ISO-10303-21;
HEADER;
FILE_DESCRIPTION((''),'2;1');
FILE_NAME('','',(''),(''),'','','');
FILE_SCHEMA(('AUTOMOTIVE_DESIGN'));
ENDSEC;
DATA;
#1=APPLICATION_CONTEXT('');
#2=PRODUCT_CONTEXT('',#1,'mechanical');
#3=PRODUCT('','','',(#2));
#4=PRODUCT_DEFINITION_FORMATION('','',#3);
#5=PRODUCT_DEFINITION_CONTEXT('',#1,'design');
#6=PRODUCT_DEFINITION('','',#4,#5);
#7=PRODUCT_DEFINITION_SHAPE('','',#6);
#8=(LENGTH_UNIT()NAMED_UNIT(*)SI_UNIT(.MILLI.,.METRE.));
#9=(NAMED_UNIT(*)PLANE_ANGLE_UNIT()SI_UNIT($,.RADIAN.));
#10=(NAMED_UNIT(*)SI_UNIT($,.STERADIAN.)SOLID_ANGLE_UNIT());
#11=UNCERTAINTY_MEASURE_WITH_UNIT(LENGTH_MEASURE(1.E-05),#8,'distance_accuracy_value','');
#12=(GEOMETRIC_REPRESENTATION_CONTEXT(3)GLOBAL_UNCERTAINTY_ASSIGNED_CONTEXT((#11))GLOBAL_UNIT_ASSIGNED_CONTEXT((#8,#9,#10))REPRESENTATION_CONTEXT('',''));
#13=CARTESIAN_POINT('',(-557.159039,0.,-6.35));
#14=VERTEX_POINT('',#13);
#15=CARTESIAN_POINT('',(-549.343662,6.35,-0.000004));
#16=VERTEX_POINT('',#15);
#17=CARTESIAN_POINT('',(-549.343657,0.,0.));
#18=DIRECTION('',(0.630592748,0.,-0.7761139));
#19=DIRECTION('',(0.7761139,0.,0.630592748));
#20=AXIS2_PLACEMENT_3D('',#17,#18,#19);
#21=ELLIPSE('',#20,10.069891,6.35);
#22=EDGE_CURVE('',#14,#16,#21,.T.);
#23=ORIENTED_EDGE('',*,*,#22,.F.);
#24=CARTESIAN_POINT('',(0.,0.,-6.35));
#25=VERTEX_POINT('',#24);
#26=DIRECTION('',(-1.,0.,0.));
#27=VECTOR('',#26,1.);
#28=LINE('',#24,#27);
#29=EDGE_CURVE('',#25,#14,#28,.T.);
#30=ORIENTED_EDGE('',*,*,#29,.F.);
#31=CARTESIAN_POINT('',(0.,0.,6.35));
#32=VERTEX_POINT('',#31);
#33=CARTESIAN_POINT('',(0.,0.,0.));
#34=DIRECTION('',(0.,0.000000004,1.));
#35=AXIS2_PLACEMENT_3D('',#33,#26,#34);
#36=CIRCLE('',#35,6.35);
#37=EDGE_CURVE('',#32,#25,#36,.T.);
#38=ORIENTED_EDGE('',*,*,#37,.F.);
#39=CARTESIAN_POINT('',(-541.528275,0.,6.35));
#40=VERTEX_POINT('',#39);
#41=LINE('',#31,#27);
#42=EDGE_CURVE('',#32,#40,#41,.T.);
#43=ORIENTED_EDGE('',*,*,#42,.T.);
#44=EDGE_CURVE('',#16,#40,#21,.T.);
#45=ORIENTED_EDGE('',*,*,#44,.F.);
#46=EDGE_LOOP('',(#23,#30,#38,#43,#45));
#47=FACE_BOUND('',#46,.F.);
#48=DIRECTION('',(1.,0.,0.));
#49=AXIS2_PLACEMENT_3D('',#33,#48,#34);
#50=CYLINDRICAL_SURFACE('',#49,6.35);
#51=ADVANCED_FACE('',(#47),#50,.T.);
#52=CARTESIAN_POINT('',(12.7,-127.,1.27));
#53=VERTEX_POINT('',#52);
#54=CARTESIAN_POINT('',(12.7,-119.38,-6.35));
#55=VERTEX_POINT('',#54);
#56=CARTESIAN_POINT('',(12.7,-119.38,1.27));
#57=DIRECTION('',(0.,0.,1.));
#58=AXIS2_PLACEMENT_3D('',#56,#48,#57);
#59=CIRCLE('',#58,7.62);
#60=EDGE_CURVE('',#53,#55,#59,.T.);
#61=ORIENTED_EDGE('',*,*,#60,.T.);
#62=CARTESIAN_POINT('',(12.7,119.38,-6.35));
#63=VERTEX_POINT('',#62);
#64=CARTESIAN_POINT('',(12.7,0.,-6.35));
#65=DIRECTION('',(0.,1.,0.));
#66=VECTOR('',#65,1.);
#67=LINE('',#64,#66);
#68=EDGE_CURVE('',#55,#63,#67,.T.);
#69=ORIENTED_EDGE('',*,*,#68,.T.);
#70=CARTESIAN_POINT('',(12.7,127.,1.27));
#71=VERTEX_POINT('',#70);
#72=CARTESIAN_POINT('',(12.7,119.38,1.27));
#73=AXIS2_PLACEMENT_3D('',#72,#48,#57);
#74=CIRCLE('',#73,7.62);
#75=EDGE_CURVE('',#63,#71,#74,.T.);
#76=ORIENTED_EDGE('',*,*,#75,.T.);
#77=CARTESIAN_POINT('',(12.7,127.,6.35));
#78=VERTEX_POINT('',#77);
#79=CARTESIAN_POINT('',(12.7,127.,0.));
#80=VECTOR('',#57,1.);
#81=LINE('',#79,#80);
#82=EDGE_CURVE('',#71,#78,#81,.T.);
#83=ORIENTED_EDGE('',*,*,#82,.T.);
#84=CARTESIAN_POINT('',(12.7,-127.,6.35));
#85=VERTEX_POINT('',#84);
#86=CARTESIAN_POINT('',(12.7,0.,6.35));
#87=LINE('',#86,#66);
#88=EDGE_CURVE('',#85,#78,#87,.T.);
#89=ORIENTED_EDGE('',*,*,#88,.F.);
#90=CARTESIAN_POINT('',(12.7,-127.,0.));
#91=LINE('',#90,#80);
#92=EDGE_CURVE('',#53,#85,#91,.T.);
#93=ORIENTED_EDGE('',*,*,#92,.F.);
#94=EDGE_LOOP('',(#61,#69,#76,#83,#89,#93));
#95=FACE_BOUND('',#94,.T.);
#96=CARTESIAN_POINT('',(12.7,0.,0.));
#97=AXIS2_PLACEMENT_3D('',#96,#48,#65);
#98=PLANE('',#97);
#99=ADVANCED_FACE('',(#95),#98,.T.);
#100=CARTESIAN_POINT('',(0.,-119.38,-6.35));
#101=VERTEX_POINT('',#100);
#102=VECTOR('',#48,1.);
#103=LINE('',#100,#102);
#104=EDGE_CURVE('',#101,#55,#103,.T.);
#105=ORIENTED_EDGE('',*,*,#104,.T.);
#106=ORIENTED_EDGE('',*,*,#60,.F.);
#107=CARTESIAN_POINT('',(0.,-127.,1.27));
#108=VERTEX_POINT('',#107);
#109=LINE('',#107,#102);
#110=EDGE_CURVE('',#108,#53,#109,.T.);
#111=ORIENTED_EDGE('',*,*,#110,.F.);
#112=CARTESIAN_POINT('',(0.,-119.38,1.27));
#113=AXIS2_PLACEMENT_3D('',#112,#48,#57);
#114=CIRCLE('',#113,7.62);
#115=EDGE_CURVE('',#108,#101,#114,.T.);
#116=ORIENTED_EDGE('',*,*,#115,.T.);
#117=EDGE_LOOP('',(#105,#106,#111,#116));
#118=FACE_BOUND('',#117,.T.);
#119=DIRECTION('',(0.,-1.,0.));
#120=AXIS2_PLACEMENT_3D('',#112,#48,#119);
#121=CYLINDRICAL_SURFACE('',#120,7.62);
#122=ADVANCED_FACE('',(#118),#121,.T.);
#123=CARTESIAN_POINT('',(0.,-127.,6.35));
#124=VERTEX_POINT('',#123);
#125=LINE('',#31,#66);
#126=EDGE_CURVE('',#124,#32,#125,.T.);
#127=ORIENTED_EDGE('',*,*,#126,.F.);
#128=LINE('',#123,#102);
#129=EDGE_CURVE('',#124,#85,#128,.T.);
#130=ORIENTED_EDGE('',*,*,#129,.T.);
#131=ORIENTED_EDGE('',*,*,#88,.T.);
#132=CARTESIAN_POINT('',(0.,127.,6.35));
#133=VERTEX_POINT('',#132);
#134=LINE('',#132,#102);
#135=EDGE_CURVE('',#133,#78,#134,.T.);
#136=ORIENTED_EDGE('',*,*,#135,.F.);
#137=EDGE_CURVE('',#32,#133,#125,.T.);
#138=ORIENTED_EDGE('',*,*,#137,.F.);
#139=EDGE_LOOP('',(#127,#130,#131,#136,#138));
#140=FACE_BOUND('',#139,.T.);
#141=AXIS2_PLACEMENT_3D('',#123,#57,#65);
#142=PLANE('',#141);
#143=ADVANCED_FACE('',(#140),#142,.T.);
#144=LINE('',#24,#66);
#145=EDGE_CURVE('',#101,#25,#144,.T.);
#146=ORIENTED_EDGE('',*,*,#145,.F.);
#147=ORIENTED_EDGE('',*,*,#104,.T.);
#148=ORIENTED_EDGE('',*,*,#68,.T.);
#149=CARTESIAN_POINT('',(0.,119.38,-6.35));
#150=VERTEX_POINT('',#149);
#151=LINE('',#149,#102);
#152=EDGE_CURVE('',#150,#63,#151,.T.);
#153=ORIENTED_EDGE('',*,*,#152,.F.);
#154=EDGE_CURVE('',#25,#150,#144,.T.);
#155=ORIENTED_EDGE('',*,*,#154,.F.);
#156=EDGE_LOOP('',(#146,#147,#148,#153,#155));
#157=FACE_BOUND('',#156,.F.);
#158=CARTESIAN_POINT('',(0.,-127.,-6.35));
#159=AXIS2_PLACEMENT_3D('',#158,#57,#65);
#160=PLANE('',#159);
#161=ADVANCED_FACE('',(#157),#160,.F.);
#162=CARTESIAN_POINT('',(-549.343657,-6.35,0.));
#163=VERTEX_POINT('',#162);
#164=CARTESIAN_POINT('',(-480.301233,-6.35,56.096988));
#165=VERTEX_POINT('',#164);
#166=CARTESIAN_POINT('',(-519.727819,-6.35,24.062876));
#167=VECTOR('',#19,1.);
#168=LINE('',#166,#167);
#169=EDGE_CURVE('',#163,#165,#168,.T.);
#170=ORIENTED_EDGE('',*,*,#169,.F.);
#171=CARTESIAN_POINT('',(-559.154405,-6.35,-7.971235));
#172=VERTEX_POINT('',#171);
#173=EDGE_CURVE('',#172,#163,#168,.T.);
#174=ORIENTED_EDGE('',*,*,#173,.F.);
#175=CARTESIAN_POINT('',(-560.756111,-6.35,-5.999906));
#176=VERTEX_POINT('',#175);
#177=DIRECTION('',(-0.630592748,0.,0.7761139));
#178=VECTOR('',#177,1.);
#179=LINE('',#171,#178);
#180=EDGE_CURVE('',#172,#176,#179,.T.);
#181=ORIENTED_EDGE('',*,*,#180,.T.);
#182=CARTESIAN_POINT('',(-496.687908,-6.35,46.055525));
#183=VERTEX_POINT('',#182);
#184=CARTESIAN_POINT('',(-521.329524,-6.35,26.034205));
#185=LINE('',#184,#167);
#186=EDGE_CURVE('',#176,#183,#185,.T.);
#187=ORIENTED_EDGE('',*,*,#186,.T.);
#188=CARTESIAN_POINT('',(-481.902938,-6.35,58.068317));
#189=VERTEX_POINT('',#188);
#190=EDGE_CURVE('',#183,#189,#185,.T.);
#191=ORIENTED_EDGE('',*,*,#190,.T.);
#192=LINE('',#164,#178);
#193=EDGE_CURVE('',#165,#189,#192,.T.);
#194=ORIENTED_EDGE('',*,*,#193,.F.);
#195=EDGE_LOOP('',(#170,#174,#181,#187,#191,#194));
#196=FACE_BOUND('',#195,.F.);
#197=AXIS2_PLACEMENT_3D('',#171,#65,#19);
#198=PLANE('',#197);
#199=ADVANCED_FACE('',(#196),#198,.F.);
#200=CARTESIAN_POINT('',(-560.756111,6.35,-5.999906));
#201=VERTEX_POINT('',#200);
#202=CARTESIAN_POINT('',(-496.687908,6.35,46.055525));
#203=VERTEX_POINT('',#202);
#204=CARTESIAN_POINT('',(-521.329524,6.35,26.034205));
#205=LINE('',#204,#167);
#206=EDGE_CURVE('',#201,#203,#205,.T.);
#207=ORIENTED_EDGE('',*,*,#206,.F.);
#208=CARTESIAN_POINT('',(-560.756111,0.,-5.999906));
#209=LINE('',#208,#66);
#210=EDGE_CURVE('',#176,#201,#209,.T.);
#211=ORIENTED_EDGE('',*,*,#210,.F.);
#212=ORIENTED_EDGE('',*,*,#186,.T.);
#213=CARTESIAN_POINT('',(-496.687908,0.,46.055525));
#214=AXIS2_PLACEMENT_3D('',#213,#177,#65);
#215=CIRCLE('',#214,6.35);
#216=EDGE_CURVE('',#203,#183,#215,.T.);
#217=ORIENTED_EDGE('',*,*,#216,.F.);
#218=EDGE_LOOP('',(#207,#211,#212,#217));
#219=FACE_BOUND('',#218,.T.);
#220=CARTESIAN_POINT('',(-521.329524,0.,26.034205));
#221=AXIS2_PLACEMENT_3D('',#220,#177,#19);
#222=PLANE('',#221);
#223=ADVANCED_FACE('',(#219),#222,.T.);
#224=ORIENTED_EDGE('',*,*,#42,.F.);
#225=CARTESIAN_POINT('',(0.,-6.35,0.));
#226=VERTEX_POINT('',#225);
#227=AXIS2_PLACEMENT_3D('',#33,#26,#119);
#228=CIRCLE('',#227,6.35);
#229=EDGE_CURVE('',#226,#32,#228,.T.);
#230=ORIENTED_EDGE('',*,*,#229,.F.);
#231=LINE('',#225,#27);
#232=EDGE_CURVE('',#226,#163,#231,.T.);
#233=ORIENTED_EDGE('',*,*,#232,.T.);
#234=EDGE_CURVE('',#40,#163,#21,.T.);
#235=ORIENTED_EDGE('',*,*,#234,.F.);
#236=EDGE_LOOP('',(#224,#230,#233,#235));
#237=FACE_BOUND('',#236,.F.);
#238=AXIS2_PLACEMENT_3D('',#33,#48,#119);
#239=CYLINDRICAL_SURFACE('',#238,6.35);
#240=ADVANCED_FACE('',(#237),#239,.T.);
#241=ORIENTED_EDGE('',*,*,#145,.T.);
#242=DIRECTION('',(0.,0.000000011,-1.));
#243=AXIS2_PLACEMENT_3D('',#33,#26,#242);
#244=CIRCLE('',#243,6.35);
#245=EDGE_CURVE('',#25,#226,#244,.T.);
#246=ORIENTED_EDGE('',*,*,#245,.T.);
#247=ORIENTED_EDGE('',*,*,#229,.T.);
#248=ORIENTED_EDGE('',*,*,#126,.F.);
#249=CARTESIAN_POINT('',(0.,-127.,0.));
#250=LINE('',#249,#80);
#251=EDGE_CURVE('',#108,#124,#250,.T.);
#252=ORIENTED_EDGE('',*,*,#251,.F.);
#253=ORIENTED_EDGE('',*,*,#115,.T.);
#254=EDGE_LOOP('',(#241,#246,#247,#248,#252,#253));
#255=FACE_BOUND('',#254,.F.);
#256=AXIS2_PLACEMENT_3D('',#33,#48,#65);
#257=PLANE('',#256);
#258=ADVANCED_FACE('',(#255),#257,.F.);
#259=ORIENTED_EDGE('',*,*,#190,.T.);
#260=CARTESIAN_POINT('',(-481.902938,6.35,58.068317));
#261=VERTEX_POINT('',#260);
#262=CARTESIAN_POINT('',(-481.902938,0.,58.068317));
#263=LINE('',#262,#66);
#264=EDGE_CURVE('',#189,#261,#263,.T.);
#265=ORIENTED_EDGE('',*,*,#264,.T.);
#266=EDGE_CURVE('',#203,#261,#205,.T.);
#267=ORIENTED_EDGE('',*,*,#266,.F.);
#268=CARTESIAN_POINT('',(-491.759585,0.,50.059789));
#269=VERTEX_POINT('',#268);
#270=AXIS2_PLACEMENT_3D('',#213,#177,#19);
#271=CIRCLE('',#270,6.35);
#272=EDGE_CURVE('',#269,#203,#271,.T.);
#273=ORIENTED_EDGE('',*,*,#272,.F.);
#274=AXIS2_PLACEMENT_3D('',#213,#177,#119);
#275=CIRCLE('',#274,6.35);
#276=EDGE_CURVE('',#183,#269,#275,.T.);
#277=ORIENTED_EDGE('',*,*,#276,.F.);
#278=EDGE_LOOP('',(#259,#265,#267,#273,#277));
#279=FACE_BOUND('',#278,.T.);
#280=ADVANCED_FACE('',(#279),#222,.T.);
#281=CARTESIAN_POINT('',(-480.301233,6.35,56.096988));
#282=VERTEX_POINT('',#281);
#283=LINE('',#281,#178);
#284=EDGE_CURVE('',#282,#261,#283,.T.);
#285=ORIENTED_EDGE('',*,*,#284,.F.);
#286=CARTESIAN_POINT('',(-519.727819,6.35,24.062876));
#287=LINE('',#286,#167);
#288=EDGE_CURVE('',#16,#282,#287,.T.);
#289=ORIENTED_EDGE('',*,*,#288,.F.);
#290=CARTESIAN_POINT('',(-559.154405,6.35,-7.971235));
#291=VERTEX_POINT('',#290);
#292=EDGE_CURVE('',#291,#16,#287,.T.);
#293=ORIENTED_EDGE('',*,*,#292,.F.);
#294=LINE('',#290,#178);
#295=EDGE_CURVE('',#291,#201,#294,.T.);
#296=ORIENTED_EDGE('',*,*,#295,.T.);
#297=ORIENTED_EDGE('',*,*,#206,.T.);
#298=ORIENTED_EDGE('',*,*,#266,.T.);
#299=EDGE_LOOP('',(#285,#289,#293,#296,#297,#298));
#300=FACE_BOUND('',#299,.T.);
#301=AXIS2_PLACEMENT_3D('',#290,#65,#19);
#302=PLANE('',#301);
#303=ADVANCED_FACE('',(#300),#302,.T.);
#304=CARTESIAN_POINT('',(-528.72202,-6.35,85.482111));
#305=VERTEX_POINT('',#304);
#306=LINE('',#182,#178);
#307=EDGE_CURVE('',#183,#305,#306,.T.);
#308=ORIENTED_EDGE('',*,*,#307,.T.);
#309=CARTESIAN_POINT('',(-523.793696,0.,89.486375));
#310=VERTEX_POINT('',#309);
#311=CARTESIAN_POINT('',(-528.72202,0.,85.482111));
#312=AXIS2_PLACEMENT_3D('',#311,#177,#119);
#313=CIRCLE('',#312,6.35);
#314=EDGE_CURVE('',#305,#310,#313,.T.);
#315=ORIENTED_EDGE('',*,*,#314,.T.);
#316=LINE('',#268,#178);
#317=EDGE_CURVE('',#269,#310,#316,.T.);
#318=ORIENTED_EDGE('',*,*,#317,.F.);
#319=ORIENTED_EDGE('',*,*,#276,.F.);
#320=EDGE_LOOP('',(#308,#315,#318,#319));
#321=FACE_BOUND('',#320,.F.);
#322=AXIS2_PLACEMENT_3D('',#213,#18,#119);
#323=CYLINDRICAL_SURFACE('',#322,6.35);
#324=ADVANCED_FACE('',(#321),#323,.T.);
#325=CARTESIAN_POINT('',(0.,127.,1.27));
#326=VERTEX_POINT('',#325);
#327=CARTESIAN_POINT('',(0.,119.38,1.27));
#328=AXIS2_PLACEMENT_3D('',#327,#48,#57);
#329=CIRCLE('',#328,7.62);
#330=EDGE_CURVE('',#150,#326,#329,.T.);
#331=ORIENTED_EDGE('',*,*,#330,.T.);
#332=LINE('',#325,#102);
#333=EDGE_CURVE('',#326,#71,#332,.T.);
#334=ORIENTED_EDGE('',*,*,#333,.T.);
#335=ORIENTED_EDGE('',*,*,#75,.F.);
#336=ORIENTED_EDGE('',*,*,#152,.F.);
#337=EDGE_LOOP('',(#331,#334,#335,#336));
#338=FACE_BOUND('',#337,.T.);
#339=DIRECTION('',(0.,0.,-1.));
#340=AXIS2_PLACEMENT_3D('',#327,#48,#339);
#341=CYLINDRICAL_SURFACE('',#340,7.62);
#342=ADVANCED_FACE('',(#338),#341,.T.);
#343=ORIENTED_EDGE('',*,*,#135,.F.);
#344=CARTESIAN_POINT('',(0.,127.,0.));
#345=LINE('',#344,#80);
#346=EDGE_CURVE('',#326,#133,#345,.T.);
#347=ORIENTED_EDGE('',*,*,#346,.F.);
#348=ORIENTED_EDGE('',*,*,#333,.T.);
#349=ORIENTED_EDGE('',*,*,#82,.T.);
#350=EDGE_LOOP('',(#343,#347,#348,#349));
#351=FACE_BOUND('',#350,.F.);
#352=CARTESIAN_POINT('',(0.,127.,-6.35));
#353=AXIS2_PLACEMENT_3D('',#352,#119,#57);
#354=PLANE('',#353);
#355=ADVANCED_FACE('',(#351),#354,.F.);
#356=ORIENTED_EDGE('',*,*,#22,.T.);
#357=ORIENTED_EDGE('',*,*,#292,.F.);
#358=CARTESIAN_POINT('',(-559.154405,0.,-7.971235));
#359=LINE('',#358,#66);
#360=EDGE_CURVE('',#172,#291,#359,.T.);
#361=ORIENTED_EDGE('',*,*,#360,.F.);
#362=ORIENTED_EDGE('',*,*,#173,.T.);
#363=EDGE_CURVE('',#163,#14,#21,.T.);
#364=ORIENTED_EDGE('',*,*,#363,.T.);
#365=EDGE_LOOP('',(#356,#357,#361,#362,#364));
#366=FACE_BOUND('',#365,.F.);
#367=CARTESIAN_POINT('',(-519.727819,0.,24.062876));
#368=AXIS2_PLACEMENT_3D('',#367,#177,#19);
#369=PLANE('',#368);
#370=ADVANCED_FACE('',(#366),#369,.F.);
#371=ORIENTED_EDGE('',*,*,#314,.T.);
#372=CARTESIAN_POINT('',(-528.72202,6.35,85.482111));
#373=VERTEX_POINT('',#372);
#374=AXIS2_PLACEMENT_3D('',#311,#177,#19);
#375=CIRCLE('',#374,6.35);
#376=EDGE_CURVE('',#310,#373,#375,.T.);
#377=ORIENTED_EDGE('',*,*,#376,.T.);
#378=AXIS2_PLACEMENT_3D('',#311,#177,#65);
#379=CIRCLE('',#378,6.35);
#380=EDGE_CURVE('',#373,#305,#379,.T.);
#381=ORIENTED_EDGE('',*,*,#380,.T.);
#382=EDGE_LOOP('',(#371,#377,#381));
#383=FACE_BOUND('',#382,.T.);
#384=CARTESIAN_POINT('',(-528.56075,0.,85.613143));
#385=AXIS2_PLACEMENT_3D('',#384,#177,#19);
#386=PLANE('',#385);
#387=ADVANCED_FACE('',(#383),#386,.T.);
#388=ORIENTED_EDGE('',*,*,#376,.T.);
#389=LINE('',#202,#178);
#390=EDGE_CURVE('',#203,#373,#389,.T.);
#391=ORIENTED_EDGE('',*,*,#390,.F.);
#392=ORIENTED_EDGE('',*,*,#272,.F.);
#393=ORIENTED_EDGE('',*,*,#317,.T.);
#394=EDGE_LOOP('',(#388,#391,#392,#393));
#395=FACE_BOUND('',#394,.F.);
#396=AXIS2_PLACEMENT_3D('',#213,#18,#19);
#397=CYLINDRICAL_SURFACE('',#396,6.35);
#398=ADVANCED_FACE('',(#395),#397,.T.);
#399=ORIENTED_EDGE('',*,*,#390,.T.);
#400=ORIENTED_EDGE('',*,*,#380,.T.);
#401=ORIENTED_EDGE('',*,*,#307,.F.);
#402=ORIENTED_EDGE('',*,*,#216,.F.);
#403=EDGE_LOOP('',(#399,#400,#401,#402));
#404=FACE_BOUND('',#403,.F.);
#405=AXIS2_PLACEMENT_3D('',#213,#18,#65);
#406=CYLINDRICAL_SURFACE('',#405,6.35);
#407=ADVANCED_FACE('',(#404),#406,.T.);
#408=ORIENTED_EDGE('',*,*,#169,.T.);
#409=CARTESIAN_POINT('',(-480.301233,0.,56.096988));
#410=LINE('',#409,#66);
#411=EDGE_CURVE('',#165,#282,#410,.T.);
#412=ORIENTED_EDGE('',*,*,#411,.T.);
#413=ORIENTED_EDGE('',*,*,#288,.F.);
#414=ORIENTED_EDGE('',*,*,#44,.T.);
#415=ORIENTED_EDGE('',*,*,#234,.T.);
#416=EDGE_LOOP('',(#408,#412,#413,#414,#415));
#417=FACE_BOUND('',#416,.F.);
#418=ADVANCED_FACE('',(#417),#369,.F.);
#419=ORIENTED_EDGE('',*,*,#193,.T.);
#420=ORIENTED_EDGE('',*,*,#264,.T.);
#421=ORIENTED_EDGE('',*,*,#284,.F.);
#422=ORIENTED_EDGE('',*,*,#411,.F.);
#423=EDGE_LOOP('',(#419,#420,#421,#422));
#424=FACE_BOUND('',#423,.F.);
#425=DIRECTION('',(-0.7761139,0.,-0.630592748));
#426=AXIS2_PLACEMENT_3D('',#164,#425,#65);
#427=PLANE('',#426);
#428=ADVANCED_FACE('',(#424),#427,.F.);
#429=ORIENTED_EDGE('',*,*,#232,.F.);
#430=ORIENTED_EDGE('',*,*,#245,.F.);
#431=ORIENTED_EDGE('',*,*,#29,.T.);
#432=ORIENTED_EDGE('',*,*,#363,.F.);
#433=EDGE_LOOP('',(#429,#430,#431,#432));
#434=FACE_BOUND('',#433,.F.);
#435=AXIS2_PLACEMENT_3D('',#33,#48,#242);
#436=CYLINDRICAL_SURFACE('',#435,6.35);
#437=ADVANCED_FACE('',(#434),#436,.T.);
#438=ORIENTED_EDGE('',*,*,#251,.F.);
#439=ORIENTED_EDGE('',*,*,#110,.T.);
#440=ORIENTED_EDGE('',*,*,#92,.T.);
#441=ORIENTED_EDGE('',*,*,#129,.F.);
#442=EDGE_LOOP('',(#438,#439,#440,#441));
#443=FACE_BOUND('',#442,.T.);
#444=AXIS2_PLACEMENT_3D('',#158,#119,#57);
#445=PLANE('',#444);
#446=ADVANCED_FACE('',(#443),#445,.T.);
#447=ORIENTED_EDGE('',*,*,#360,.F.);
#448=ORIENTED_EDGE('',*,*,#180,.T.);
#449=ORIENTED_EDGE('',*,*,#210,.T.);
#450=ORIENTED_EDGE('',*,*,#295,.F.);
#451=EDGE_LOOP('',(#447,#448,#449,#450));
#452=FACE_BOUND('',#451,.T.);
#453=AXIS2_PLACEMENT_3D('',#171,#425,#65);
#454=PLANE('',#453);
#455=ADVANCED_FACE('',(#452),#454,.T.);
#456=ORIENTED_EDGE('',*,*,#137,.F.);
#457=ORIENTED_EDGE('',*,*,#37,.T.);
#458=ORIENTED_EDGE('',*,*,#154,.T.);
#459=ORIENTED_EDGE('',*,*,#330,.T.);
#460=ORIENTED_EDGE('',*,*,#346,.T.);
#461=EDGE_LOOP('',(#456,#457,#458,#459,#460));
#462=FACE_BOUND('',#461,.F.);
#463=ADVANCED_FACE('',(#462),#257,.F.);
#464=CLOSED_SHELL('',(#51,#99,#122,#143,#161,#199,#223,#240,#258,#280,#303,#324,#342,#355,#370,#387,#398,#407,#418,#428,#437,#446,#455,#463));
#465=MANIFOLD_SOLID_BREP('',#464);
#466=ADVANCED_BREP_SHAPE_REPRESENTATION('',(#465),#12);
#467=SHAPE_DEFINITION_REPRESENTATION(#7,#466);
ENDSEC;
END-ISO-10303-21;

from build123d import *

# Parameters (mm, degrees)
F0_W      = 254
F0_H      = 12.7
F1_DEPTH  = 12.7
F3_DEPTH  = 558.8
F4_R      = 7.62
F6_DEPTH  = 12.7
F7_W      = 101.6
F7_H      = 12.7
F8_DEPTH  = 2.54
F10_DEPTH = 50.8


with BuildPart() as f1:
    # F0 (on Right) → F1 (new body)
    with BuildSketch(Plane.YZ):
        Rectangle(F0_W, F0_H)
    extrude(amount=F1_DEPTH)

    # F2 (on face) → F3 (join)
    with BuildSketch(Plane(origin=(0, 0, 0), x_dir=(0, -1, 0), z_dir=(-1, 0, 0))):
        with BuildLine():
            ThreePointArc((-6.84e-08, -6.35), (4.4901280364, -4.4901280847), (6.35, 0))
            ThreePointArc((6.35, 0), (4.4901280521, 4.4901280689), (-2.37e-08, 6.35))
            ThreePointArc((-2.37e-08, 6.35), (-6.35, 2.23e-08), (-6.84e-08, -6.35))
        make_face()
    extrude(amount=F3_DEPTH)

    # F4
    f4_edges = [f1.edges().sort_by_distance(p)[0] for p in [
        (6.35, -127, -6.35),
        (6.35, 127, -6.35),
    ]]
    fillet(f4_edges, radius=F4_R)

    # F5 (on Front) → F6 (cut, symmetric)
    with BuildSketch(Plane.XZ):
        Polygon((-541.0905659676, 6.7056384869), (-558.8, 6.7056384869), (-558.8, -7.6832813211), align=None)
    extrude(amount=F6_DEPTH, both=True, mode=Mode.SUBTRACT)

    # F7 (on face) → F8 (join)
    with BuildSketch(Plane(origin=(-218.4449745832, 0, 268.8552663249), x_dir=(0.7761139002, 0, 0.630592748), z_dir=(-0.630592748, 0, 0.7761139002))):
        with Locations((-388.1941093914, 0)):
            Rectangle(F7_W, F7_H)
    extrude(amount=F8_DEPTH)

    # F9 (on face) → F10 (join)
    with BuildSketch(Plane(origin=(-220.0466801631, 0, 270.8265956315), x_dir=(0.7761139002, 0, 0.630592748), z_dir=(-0.630592748, 0, 0.7761139002))):
        with BuildLine():
            ThreePointArc((-356.4441093914, -6.35), (-351.9539813308, -4.4901280605), (-350.0941093914, 0))
            ThreePointArc((-350.0941093914, 0), (-351.9539813308, 4.4901280605), (-356.4441093914, 6.35))
            ThreePointArc((-356.4441093914, 6.35), (-362.7941093914, 0), (-356.4441093914, -6.35))
        make_face()
    extrude(amount=F10_DEPTH)


solid = f1.part
